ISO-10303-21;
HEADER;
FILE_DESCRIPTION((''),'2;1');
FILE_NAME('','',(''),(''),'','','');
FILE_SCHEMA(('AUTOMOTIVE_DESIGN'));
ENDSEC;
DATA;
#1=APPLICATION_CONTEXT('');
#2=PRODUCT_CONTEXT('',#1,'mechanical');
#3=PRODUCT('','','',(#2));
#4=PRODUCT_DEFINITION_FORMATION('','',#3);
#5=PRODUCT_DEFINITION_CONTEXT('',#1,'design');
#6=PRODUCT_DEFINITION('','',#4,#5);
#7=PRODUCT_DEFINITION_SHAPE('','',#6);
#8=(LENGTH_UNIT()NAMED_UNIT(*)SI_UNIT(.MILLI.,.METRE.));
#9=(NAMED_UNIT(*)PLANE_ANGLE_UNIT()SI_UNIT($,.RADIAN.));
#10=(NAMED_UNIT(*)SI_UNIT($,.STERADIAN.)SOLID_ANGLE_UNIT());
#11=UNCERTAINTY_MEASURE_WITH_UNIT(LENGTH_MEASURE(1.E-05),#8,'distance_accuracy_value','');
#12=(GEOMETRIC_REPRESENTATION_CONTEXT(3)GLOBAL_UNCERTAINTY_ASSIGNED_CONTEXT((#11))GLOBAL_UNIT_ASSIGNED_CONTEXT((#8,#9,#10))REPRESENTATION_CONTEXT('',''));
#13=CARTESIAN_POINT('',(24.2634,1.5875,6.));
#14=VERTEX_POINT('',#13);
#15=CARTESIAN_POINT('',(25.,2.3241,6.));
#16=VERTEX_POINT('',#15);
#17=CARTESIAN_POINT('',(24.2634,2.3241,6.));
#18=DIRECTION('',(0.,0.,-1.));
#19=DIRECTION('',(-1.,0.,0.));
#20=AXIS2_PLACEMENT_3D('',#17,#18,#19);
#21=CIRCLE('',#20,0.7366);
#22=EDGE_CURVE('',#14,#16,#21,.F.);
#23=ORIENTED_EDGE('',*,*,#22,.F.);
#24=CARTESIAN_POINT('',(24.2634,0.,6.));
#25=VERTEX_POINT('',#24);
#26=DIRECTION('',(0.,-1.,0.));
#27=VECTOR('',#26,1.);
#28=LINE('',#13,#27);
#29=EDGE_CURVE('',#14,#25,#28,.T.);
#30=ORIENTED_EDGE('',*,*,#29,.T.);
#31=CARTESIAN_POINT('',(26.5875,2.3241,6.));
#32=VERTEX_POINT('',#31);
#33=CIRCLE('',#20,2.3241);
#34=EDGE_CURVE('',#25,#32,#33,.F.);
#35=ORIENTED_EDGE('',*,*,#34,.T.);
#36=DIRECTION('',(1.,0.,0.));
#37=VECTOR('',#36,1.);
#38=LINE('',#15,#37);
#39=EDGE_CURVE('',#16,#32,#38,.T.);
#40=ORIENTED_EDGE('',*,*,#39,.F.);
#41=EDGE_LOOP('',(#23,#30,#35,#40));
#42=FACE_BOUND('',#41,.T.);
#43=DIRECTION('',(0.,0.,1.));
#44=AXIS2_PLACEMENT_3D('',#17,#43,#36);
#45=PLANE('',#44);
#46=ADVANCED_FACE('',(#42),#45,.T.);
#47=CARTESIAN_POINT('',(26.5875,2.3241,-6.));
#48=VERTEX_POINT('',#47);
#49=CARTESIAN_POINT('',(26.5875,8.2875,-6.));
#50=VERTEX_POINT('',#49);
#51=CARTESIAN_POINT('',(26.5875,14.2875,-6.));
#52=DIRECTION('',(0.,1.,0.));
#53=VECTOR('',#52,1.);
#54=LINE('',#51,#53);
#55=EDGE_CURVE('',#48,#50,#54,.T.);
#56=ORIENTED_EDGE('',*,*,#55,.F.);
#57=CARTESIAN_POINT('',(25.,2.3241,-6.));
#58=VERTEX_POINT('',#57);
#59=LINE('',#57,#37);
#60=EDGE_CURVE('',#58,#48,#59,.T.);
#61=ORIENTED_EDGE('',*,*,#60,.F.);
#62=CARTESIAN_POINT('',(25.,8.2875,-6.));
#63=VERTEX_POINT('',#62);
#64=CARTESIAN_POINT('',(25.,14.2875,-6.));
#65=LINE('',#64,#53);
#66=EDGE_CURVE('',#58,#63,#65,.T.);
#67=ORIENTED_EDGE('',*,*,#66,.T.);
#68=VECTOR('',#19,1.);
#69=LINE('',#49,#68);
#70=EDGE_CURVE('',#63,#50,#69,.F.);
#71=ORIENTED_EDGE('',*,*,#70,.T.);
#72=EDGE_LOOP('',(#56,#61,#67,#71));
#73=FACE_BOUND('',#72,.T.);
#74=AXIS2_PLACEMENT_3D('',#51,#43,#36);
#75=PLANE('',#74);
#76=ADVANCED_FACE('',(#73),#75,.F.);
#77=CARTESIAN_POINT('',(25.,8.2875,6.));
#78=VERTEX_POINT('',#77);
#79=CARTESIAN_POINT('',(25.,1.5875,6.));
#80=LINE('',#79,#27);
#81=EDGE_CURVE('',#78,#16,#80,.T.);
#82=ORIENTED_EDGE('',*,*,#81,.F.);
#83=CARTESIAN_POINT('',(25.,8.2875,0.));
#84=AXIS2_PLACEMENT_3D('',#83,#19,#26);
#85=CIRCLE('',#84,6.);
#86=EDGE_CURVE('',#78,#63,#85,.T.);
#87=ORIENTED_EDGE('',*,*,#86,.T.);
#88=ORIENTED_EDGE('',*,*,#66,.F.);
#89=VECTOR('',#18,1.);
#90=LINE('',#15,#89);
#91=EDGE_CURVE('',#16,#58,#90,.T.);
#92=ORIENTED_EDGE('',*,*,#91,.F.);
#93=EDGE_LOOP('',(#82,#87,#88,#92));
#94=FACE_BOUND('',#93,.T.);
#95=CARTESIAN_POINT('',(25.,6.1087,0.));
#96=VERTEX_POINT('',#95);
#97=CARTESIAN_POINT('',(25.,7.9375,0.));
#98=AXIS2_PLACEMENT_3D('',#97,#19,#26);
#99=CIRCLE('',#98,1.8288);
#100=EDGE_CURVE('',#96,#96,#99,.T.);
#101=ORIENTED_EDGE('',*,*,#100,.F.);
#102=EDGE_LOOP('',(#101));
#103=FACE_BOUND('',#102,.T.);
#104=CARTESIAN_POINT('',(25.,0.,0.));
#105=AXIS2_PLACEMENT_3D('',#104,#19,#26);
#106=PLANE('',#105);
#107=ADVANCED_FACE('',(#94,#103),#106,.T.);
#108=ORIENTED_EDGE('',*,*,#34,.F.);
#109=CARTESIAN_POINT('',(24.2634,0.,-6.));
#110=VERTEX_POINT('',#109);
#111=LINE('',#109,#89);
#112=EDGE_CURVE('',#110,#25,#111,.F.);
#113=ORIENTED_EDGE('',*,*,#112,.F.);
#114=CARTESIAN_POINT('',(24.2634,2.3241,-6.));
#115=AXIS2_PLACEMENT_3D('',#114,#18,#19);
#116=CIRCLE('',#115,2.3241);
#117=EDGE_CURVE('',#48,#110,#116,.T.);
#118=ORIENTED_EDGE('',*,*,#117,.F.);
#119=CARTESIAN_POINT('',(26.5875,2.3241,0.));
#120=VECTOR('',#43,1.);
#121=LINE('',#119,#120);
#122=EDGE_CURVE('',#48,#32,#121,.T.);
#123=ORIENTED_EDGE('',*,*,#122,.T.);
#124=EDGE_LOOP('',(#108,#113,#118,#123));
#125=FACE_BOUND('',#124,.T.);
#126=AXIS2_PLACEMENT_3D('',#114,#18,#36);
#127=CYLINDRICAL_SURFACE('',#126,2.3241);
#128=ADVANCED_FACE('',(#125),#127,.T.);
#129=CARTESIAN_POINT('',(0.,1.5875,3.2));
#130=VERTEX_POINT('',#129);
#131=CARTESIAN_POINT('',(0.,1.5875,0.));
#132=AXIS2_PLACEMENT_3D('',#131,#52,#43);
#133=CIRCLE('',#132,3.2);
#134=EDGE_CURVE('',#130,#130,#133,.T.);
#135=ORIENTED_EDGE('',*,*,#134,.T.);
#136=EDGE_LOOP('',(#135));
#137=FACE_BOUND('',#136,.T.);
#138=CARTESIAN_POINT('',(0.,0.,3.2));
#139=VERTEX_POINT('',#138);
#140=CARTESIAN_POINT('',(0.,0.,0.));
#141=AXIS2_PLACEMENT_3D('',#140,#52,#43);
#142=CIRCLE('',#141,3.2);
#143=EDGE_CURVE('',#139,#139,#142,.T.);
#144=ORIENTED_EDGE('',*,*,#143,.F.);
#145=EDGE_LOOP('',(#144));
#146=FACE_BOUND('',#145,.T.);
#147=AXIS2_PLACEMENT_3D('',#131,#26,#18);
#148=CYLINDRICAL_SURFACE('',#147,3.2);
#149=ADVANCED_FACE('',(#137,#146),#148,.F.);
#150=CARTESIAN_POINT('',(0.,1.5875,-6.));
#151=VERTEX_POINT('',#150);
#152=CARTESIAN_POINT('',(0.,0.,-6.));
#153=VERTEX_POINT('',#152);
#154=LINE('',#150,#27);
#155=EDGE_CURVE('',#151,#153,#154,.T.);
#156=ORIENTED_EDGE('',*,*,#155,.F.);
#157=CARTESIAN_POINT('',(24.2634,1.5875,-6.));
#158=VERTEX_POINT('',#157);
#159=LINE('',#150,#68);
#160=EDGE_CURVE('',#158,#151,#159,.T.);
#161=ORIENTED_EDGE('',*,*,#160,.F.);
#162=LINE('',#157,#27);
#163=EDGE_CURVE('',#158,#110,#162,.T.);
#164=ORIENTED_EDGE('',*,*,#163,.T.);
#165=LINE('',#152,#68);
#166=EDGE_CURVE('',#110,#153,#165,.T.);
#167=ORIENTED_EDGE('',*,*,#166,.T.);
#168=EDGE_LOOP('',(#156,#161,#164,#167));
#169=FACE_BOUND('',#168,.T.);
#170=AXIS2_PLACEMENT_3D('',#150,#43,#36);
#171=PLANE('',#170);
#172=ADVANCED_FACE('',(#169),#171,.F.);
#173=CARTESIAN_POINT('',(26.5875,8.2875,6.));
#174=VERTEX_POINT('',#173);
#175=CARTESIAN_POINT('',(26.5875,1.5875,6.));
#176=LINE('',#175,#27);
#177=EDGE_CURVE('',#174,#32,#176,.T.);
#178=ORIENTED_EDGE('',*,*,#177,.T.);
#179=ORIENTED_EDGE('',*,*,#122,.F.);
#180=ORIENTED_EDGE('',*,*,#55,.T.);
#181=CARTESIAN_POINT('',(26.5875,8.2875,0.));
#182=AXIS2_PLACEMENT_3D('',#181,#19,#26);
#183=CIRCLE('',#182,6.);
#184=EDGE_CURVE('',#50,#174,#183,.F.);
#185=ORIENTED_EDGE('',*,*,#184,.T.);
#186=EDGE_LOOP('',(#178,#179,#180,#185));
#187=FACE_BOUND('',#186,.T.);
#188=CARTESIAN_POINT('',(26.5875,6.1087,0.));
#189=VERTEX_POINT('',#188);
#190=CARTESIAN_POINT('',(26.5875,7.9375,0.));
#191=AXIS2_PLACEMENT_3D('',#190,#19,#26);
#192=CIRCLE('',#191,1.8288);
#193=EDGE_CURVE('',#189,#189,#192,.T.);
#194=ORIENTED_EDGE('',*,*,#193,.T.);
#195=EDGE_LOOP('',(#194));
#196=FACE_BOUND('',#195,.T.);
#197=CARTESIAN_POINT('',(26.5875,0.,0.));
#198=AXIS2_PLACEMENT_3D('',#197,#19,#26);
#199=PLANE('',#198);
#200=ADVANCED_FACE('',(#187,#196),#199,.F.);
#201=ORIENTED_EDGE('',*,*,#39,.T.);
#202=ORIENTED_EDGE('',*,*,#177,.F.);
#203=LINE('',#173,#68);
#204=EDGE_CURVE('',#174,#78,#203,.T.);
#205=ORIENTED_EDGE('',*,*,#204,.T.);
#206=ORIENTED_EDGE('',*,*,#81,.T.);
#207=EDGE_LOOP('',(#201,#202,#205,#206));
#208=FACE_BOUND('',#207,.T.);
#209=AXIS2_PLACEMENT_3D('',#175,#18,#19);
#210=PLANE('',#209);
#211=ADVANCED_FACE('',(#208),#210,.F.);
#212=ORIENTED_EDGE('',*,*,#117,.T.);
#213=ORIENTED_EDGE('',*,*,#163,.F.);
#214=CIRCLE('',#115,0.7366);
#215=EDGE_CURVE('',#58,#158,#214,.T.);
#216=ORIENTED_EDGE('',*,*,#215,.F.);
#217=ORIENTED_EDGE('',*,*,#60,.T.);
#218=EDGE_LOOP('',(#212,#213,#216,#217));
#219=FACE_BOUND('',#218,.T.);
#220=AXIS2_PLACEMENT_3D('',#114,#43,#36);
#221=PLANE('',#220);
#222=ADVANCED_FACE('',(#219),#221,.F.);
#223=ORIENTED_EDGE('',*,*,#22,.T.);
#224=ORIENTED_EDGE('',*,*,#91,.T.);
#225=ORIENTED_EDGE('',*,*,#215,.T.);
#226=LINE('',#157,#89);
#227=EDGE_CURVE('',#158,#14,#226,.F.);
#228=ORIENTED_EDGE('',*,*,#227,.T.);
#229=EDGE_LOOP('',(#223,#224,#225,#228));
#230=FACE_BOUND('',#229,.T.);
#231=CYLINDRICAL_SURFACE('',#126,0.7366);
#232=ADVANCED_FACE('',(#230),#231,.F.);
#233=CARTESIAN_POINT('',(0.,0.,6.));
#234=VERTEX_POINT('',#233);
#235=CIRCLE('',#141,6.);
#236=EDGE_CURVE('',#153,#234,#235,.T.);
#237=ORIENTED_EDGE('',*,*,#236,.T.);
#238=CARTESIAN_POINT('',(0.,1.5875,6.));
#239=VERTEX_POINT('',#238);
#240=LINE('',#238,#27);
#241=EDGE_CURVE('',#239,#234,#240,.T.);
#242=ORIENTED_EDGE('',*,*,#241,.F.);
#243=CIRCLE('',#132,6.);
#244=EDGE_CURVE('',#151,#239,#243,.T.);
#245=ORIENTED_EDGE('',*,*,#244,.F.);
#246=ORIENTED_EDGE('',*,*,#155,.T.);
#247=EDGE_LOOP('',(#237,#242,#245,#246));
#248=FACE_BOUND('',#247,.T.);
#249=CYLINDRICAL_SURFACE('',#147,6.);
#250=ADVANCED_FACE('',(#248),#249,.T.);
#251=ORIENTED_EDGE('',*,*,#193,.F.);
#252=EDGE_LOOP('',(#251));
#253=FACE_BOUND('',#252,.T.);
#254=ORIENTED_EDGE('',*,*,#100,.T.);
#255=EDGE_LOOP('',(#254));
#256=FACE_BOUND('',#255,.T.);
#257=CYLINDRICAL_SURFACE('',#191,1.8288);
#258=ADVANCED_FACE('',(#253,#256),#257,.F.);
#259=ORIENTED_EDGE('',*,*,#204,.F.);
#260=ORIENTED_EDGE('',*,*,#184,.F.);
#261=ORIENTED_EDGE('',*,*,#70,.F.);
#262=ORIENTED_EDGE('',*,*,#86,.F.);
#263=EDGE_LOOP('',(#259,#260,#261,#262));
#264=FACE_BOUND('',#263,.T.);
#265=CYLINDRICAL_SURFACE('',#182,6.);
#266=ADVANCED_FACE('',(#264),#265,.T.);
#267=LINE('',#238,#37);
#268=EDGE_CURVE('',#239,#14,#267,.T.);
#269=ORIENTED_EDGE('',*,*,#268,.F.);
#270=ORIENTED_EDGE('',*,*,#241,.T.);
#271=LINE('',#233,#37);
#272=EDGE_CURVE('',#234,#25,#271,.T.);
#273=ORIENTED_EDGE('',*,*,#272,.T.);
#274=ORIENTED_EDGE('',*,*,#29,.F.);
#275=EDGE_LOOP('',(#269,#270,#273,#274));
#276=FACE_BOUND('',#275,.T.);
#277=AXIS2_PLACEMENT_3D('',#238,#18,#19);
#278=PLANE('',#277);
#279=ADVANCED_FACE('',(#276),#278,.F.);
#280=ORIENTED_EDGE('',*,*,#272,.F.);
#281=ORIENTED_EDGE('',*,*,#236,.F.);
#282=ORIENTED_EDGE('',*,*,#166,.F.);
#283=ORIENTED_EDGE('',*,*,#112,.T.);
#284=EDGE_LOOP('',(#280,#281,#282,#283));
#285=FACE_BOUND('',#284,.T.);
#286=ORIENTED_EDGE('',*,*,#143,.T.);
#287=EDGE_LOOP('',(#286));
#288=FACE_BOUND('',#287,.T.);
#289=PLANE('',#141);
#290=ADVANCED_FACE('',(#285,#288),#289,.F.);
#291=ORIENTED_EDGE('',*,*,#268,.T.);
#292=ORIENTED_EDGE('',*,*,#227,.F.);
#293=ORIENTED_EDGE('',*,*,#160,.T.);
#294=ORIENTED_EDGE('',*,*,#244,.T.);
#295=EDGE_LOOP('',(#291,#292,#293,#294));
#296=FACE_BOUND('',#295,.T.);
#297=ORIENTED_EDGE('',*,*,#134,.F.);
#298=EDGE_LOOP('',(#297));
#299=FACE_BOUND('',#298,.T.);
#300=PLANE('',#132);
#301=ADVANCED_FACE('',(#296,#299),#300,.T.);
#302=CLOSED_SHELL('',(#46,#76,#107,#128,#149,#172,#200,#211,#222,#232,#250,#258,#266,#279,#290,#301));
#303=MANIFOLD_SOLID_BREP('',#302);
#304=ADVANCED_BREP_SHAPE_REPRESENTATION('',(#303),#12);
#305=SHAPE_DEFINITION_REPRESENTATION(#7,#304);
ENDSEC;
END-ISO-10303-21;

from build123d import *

# Parameters (mm, degrees)
SKETCH1_R                    = 3.2
BASE_FLANGE1_DEPTH           = 1.5875
EDGE_FLANGE1_STRIP_W         = 7.8232
EDGE_FLANGE1_STRIP_H         = 1.5875
EDGE_FLANGE1_STRIP_CUT_DEPTH = 12
EDGE_FLANGE1_DEPTH           = 12
HOLE1_START                  = 25
HOLE1_OUTLINE_R              = 1.8288
HOLE1_DEPTH                  = 1.5875
FILLET1_RADIUS               = 6
FILLET1_LENGTH               = 1.5875


# Read off the part's stored shape, not the designer's step: Hole1
# Sheet-metal steps are written as plain solids
with BuildPart() as part:
    # Sketch1 → Base-Flange1 (new body)
    with BuildSketch(Plane(origin=(0, 0, 0), x_dir=(1, 0, 0), z_dir=(0, 1, 0))):
        with BuildLine():
            Line((0, 6), (25, 6))
            Line((25, 6), (25, -6))
            Line((25, -6), (0, -6))
            ThreePointArc((0, -6), (-6, 0), (0, 6))
        make_face()
        with Locations(Location((0, 0, 0), (0, 0, 270))):
            Circle(SKETCH1_R, mode=Mode.SUBTRACT)
    extrude(amount=BASE_FLANGE1_DEPTH)

    # Edge-Flange1 strip (across the edge) → Edge-Flange1 strip cut (cut)
    with BuildSketch(Plane(origin=(25, 1.5875, 6), x_dir=(-1, 0, 0), z_dir=(0, 0, -1))):
        with Locations((-3.175, -0.79375)):
            Rectangle(EDGE_FLANGE1_STRIP_W, EDGE_FLANGE1_STRIP_H)
    extrude(amount=EDGE_FLANGE1_STRIP_CUT_DEPTH, mode=Mode.SUBTRACT)

    # Edge-Flange1 section (across the edge) → Edge-Flange1 (add)
    with BuildSketch(Plane(origin=(25, 1.5875, 6), x_dir=(-1, 0, 0), z_dir=(0, 0, -1))):
        with BuildLine():
            Line((-1.5875, 0.7366), (-1.5875, 12.7))
            Line((-1.5875, 12.7), (0, 12.7))
            Line((0, 12.7), (0, 0.7366))
            ThreePointArc((0, 0.7366), (0.215745145, 0.215745145), (0.7366, 0))
            Line((0.7366, 0), (0.7366, -1.5875))
            ThreePointArc((0.7366, -1.5875), (-0.90678687, -0.90678687), (-1.5875, 0.7366))
        make_face()
    extrude(amount=EDGE_FLANGE1_DEPTH)

    # Hole1 outline → Hole1 (cut)
    with BuildSketch(Plane.YZ.offset(HOLE1_START)):
        with Locations((7.9375, 0)):
            Circle(HOLE1_OUTLINE_R)
    extrude(amount=HOLE1_DEPTH, mode=Mode.SUBTRACT)

    # Fillet1: full round fillet: the end face becomes a half cylinder, R = half its width
    fillet1_face = Plane((25.79375, 14.2875, 0), x_dir=(1, 0, 0), z_dir=(0, 1, 0))  # on the end face: x along it, z out of the body
    fillet1_slab = fillet1_face.offset(-FILLET1_RADIUS / 2) * Box(FILLET1_LENGTH, 2 * FILLET1_RADIUS, FILLET1_RADIUS, mode=Mode.PRIVATE)  # the body's end, R deep
    fillet1_round = Plane((25.79375, 8.2875, 0), x_dir=(0, 1, 0), z_dir=(1, 0, 0)) * Cylinder(FILLET1_RADIUS, FILLET1_LENGTH, mode=Mode.PRIVATE)  # its axis R under the face
    add(fillet1_slab - fillet1_round, mode=Mode.SUBTRACT)


solid = part.part
